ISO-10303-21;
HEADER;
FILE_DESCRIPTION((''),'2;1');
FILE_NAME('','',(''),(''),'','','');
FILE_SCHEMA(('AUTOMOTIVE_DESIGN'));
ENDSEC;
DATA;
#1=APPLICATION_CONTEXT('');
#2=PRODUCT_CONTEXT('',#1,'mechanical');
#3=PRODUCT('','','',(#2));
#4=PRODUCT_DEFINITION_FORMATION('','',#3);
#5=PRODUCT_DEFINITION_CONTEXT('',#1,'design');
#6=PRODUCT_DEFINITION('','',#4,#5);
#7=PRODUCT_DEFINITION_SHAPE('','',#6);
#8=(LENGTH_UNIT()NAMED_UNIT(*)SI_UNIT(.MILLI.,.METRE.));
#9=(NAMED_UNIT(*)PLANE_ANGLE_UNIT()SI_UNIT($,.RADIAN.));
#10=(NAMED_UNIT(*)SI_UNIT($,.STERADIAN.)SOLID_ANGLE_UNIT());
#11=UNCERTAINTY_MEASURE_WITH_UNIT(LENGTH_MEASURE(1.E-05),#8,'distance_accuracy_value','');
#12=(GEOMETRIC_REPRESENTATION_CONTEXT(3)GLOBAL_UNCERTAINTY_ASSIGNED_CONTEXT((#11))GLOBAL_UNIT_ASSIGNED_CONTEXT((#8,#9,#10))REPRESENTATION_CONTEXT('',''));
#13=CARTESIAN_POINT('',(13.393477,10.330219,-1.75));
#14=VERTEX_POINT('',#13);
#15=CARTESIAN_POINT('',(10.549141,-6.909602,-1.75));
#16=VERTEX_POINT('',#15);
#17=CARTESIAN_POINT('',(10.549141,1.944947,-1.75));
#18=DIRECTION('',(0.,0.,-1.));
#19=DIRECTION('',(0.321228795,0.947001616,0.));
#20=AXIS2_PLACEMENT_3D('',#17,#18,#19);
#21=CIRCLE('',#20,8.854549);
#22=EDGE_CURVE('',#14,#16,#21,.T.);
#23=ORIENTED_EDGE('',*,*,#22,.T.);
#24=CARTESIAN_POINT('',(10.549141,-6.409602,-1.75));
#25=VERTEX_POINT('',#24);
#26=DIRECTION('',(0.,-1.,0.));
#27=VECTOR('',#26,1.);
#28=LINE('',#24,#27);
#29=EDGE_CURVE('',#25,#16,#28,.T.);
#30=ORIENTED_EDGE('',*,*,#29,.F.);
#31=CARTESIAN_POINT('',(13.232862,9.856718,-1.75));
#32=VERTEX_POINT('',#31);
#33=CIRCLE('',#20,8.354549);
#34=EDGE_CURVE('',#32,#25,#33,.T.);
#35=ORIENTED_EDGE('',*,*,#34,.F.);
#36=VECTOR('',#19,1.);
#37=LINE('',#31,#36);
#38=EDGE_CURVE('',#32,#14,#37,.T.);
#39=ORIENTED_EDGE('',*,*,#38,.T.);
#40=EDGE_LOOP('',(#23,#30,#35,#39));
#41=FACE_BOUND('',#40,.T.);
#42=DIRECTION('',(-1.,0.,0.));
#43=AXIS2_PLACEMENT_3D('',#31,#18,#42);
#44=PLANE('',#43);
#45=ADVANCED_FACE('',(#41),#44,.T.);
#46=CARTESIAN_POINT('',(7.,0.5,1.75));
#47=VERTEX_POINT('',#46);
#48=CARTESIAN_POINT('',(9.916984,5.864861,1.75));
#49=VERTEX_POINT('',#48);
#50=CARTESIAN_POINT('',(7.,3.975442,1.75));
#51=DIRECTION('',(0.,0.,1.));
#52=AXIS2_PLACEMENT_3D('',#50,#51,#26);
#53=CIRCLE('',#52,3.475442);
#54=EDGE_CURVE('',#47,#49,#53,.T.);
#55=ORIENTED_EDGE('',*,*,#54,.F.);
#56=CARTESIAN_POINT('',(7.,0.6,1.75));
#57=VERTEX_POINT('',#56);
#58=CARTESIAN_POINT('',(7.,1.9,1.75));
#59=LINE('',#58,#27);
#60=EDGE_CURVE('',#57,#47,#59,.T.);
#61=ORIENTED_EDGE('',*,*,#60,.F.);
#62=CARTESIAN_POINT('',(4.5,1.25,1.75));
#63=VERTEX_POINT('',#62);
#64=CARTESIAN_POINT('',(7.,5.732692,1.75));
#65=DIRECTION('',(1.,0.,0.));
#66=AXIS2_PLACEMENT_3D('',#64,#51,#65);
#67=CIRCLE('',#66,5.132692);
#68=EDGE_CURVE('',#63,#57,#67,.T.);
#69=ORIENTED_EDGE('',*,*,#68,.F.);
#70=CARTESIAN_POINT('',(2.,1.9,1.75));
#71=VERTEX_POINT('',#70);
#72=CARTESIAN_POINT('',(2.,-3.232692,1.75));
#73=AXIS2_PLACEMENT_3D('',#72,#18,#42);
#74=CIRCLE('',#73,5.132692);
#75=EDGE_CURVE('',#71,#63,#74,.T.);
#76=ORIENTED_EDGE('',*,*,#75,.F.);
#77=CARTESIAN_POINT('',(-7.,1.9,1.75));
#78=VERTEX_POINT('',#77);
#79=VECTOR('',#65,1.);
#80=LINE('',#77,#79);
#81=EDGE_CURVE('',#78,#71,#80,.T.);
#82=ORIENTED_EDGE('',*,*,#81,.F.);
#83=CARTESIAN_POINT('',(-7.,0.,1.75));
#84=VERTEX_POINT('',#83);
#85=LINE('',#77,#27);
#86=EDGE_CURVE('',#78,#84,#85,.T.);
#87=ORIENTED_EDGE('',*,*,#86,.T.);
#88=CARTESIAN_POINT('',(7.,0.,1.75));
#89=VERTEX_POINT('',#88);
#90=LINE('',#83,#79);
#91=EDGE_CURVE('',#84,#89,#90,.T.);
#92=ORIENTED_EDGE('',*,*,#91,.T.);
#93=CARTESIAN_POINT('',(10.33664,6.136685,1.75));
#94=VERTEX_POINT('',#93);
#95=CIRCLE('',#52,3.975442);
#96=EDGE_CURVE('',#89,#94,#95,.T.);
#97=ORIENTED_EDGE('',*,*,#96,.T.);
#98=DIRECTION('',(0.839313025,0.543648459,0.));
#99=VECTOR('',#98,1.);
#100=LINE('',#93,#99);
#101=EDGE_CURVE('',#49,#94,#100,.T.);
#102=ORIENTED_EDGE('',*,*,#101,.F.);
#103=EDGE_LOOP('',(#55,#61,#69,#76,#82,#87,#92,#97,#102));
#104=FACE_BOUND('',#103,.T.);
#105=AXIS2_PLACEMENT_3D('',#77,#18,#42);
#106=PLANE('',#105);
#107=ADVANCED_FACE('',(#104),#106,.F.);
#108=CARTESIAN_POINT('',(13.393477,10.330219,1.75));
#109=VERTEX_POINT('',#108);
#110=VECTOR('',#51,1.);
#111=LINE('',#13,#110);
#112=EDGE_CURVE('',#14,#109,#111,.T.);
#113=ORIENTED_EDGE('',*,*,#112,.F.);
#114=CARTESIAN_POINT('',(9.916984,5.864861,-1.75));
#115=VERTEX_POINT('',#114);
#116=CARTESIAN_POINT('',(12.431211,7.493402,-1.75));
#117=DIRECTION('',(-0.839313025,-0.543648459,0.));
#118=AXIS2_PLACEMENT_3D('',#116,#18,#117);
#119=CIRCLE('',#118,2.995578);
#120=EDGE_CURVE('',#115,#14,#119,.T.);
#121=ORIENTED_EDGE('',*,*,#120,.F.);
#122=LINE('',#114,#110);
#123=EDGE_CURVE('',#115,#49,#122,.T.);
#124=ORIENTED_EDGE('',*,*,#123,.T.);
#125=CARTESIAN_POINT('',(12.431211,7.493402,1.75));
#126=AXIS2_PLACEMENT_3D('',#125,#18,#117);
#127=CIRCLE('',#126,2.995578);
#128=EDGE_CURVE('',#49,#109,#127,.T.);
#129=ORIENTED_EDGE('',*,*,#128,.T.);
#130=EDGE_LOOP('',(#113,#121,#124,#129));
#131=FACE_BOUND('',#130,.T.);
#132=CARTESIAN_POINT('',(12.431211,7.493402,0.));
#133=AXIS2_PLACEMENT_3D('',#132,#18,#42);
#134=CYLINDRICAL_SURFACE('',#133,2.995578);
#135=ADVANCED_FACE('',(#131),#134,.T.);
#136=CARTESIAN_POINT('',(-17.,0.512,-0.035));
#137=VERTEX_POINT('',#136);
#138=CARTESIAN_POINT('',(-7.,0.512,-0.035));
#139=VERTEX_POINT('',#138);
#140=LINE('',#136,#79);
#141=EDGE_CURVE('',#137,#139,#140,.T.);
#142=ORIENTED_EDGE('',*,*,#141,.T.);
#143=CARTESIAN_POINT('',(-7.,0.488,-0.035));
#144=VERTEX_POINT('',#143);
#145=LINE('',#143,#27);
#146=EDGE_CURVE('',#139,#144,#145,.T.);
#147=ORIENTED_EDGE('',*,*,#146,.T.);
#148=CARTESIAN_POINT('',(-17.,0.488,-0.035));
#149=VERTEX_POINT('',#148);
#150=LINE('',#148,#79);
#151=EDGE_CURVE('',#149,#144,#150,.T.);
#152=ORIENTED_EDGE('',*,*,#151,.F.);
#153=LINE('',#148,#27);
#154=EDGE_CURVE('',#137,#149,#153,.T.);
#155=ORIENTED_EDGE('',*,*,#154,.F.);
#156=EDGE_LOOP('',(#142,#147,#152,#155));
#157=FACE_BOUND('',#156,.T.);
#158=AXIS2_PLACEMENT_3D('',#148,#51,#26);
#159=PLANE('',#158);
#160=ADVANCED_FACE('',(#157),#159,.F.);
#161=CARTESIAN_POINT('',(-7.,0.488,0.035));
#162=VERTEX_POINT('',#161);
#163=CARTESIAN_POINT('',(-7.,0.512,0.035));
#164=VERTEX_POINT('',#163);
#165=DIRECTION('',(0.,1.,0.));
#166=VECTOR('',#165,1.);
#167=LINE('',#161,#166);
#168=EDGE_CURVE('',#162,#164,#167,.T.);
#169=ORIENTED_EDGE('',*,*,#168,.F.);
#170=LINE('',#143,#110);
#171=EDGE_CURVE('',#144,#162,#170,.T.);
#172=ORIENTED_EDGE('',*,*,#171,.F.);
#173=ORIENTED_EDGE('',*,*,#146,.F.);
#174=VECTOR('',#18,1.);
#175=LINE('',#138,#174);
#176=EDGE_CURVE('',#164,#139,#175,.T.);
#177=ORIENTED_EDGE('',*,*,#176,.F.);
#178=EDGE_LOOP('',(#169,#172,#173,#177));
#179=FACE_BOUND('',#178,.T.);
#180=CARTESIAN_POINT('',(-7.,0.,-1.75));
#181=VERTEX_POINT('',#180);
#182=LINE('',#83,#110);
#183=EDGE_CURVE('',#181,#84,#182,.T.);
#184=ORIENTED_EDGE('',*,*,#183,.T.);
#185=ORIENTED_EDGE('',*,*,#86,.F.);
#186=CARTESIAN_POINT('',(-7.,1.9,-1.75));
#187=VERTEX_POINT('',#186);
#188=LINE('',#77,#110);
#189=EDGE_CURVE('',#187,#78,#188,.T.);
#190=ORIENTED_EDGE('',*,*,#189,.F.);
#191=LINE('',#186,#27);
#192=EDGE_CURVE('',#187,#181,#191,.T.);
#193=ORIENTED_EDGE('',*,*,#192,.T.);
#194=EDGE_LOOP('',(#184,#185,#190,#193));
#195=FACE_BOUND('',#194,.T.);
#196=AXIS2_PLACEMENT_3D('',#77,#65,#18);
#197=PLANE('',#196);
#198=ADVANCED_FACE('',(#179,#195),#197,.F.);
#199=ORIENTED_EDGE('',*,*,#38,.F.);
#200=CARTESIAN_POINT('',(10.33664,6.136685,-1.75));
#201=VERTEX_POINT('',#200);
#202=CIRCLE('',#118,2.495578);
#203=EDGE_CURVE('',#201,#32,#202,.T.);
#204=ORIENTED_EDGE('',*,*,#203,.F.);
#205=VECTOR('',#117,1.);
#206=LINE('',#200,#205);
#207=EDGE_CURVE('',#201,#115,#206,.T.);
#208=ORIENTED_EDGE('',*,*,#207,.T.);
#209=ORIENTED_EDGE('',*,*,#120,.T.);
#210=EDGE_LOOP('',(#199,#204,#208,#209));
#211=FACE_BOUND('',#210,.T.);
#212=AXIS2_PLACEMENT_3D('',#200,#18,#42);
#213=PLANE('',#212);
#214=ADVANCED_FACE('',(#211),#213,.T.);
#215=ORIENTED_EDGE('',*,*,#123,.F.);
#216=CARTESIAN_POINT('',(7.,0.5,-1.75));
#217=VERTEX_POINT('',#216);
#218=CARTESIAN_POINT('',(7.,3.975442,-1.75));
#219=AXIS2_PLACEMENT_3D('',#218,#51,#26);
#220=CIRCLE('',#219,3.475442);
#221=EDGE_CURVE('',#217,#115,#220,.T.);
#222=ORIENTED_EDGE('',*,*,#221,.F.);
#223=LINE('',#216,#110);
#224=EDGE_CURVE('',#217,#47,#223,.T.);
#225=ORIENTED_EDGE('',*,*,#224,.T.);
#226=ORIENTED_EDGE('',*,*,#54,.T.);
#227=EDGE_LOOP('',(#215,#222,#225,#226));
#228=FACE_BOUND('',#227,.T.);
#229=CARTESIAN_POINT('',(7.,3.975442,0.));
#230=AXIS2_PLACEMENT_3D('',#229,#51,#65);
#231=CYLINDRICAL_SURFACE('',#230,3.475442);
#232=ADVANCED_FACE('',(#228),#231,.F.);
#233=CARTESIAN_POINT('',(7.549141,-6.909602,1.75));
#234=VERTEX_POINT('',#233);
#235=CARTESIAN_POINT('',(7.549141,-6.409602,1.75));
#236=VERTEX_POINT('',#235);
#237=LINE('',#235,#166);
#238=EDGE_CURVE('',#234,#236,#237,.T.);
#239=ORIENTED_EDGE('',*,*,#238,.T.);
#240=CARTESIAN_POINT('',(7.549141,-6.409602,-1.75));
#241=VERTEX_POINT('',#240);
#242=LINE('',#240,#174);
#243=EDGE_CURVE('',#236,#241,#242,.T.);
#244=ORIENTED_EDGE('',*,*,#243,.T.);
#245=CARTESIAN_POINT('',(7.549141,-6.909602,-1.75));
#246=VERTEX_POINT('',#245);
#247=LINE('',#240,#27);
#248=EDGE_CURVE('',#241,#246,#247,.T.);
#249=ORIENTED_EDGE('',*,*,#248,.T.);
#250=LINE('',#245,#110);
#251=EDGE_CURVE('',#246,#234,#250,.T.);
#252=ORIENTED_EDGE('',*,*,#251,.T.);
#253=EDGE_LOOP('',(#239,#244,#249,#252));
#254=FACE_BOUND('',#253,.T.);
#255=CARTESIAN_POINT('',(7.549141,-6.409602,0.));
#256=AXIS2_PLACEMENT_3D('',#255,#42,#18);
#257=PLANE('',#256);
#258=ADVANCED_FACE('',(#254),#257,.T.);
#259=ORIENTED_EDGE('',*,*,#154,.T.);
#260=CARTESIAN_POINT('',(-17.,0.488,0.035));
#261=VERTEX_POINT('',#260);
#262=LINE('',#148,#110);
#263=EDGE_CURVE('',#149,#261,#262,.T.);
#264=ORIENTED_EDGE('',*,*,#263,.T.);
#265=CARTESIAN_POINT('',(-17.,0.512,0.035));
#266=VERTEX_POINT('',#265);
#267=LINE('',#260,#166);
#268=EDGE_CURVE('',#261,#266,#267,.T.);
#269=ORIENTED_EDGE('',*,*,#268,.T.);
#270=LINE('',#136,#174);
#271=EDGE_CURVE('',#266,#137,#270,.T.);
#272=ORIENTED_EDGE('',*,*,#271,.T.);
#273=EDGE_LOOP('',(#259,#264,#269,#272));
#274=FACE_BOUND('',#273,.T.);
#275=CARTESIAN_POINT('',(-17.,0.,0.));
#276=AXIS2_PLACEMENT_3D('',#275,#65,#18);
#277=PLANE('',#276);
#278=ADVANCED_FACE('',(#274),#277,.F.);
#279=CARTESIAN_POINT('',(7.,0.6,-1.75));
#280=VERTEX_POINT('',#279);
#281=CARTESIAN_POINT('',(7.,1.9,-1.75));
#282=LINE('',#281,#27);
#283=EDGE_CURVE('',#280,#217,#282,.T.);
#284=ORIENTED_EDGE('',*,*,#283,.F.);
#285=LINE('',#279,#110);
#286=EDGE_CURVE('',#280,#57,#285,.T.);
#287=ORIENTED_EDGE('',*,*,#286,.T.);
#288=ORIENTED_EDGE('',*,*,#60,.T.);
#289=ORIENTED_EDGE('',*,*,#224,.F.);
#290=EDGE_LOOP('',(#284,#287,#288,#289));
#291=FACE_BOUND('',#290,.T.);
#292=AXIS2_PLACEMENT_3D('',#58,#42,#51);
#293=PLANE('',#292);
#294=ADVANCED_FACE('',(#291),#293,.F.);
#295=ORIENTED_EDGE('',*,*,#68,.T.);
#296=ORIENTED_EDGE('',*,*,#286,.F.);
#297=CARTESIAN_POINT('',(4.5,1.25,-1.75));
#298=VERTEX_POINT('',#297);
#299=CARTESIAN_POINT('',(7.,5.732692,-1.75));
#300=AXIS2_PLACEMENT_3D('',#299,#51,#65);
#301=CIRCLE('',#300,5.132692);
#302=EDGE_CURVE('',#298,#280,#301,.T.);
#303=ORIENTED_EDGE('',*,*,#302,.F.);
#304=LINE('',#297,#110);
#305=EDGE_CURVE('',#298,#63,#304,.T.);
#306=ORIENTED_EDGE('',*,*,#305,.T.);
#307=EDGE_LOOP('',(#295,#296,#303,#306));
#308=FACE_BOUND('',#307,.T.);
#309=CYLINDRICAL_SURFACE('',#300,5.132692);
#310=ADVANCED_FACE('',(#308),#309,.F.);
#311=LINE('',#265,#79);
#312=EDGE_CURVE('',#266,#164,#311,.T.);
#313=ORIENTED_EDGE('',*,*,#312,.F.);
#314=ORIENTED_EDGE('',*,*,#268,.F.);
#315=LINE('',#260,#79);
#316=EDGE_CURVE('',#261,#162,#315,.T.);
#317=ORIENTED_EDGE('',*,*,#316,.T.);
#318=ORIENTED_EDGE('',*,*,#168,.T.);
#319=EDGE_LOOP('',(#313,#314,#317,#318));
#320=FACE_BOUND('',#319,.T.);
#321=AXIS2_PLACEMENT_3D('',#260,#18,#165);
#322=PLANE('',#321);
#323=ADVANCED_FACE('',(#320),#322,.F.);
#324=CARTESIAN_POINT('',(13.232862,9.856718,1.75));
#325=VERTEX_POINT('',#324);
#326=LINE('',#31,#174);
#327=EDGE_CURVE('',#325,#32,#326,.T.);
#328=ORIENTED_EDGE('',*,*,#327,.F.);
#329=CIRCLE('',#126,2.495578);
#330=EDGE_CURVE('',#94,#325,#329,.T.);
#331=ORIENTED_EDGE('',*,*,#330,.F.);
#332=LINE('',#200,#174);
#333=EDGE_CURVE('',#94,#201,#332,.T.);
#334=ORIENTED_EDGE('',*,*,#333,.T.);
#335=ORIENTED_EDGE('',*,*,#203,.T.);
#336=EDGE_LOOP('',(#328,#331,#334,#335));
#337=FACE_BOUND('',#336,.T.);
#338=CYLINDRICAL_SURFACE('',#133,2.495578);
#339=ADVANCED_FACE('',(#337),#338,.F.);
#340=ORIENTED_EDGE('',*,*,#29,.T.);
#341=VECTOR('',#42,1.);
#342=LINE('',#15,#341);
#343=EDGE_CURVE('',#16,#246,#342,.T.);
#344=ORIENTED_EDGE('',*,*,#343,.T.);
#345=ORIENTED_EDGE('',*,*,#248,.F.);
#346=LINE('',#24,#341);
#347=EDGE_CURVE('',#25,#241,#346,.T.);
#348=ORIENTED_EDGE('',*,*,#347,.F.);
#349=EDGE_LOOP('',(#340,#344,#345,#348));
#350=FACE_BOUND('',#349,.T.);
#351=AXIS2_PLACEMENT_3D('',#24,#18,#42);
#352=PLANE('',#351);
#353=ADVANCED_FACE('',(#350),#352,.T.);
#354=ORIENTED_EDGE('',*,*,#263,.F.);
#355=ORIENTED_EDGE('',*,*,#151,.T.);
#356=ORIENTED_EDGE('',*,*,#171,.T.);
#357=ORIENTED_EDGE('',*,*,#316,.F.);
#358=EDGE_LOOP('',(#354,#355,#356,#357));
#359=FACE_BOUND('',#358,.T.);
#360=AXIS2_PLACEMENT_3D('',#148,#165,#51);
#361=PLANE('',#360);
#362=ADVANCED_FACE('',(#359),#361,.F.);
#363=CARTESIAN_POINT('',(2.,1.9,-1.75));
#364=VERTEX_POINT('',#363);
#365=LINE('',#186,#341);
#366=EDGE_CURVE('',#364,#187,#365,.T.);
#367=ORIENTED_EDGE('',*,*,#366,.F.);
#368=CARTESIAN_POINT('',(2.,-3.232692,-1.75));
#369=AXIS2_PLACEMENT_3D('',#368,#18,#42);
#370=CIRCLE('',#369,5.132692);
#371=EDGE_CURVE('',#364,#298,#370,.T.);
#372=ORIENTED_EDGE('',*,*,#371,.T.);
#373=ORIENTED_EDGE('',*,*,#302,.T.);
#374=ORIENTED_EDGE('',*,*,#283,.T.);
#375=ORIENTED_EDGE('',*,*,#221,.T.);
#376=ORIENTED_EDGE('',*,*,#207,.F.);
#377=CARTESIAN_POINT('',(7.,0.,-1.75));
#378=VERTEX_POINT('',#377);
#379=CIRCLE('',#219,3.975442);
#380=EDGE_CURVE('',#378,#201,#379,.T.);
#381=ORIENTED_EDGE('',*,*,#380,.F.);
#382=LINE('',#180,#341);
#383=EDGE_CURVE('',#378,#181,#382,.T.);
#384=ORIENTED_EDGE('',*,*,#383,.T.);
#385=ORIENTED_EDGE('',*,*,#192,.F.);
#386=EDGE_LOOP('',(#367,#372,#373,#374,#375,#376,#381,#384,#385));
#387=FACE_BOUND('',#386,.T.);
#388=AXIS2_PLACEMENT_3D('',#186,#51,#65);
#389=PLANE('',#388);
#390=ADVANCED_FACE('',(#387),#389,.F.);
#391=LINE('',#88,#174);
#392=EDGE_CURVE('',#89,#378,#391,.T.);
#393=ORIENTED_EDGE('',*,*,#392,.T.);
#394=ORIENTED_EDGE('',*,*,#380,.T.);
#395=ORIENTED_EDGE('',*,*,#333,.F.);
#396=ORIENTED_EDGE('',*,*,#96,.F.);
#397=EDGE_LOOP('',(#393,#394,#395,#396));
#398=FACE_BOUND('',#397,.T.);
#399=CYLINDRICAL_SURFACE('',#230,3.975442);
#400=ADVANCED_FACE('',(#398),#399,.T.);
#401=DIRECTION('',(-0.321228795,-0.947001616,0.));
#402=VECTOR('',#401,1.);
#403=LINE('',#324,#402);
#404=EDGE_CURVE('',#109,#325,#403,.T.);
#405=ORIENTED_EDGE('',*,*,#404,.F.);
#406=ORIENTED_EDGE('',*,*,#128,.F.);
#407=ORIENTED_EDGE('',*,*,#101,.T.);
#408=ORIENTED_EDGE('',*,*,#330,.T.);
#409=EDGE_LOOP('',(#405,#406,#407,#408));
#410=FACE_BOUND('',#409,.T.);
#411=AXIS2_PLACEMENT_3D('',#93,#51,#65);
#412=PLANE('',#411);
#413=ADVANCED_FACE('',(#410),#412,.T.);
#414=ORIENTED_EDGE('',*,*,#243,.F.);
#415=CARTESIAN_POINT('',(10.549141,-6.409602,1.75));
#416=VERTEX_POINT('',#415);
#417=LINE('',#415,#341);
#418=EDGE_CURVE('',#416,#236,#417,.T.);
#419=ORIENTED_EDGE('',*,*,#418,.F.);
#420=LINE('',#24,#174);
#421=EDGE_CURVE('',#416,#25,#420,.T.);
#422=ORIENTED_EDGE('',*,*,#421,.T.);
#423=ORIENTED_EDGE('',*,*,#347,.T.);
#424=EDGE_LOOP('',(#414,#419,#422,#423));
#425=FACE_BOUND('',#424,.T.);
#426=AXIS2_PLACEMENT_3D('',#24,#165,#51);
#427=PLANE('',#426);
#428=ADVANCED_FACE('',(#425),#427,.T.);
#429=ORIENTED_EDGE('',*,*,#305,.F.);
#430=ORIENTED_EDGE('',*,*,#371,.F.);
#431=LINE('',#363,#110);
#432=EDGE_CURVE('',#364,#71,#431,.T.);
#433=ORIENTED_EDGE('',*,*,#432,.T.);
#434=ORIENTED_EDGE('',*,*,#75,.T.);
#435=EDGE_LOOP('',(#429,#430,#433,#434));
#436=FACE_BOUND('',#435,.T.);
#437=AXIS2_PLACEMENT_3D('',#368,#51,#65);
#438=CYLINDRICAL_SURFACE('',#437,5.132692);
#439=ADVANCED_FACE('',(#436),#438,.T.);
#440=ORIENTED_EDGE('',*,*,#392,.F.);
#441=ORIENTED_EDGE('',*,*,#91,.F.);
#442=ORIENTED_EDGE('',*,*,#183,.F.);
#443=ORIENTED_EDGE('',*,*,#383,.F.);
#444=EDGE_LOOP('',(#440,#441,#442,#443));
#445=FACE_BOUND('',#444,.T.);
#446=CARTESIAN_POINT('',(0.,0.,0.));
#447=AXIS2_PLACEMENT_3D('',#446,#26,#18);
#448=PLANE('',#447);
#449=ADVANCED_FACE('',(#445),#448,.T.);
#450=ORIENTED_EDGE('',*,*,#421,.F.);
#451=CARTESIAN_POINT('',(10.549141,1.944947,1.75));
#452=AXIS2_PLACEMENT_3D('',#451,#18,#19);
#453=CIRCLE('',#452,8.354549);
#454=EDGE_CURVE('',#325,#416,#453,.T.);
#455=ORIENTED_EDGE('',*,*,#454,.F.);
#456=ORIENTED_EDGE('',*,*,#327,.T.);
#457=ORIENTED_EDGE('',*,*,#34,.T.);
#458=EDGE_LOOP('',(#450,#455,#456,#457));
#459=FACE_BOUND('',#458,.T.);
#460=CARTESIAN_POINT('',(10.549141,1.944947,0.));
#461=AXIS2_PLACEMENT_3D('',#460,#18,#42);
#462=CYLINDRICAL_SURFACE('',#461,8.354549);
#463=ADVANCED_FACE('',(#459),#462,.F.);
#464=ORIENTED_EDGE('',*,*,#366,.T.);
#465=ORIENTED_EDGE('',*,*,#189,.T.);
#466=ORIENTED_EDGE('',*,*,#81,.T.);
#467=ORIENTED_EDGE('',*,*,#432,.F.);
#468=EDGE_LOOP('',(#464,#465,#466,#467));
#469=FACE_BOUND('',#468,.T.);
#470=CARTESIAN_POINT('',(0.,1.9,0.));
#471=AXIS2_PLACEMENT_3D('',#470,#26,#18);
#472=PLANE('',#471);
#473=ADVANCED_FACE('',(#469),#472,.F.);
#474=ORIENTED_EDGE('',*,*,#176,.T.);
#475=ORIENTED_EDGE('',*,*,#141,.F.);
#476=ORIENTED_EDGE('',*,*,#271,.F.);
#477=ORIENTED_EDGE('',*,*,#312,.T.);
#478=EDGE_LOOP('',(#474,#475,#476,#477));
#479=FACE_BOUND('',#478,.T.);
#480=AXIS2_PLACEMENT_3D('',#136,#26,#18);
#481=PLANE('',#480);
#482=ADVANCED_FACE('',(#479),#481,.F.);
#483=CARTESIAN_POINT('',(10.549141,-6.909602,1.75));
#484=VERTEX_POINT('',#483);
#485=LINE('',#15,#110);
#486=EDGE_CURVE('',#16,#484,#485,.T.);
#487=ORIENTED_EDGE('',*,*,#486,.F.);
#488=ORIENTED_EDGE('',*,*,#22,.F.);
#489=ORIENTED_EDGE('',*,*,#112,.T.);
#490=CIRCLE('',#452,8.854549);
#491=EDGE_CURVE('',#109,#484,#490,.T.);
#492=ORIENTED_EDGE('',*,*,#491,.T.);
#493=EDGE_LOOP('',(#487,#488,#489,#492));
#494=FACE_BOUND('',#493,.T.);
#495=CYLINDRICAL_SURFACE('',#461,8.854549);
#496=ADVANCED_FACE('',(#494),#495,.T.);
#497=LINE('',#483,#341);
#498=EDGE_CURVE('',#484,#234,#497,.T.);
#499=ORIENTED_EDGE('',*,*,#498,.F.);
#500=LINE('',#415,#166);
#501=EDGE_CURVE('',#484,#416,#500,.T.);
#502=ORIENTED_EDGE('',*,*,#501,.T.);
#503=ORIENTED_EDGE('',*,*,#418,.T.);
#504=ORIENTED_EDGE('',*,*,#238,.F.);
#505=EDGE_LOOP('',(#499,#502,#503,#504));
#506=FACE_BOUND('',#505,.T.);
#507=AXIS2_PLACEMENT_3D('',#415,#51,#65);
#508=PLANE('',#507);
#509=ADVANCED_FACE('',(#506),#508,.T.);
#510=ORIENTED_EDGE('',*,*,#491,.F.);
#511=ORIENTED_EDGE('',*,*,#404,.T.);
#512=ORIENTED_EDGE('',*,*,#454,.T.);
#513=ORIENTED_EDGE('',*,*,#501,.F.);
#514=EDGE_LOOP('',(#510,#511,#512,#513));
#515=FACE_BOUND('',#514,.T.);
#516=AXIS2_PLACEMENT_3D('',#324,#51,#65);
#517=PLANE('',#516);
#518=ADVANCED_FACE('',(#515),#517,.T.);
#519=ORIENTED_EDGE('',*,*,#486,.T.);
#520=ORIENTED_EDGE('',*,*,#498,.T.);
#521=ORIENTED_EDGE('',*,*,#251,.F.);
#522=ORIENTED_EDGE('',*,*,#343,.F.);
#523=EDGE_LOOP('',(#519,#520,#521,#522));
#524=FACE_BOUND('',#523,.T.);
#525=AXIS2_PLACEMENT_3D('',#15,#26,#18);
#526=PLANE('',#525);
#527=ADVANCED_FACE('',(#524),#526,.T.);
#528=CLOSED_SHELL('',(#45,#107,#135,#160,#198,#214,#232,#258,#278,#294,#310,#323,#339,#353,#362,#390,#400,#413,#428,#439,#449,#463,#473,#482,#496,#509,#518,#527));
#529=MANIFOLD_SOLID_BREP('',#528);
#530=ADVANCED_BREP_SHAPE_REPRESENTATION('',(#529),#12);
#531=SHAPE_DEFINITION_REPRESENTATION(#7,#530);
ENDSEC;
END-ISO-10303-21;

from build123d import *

# Parameters (mm, degrees)
SKETCH1_W               = 14
SKETCH1_H               = 3.5
BOSS_EXTRUDE1_DEPTH     = 1.9
CUT_EXTRUDE1_DEPTH      = 8.461400673
CUT_EXTRUDE1_DEPTH_BACK = 8.461400673
SKETCH4_W               = 0.07
SKETCH4_H               = 0.024
BOSS_EXTRUDE3_DEPTH     = 10
SWEEP1_START            = -1.75
SWEEP1_DEPTH            = 3.5


# Read off the part's stored shape, not the designer's step: Sweep1
with BuildPart() as part:
    # Sketch1 → Boss-Extrude1 (new body)
    with BuildSketch(Plane(origin=(0, 0, 0), x_dir=(1, 0, 0), z_dir=(0, 1, 0))):
        Rectangle(SKETCH1_W, SKETCH1_H)
    extrude(amount=BOSS_EXTRUDE1_DEPTH)

    # Sketch3 → Cut-Extrude1 (cut, two sides: drawn at the far end of the back side and taken through both)
    with BuildSketch(Plane.XY.offset(-CUT_EXTRUDE1_DEPTH_BACK)):
        with BuildLine():
            Line((7, 0.6), (7, 1.9))
            Line((7, 1.9), (2, 1.9))
            ThreePointArc((2, 1.9), (3.291559135, 1.734842828), (4.5, 1.25))
            ThreePointArc((4.5, 1.25), (5.708440865, 0.765157172), (7, 0.6))
        make_face()
    extrude(amount=CUT_EXTRUDE1_DEPTH + CUT_EXTRUDE1_DEPTH_BACK, mode=Mode.SUBTRACT)

    # Sketch4 → Boss-Extrude3 (add)
    with BuildSketch(Plane.ZY.offset(7)):
        with Locations((0, 0.5)):
            Rectangle(SKETCH4_W, SKETCH4_H)
    extrude(amount=BOSS_EXTRUDE3_DEPTH)

    # Sweep1 outline → Sweep1 (add)
    with BuildSketch(Plane.XY.offset(SWEEP1_START)):
        with BuildLine():
            Line((10.549140882, -6.409601789), (7.549140882, -6.409601789))
            Line((7.549140882, -6.409601789), (7.549140882, -6.909601789))
            Line((7.549140882, -6.909601789), (10.549140882, -6.909601789))
            ThreePointArc((10.549140882, -6.909601789), (19.285582655, 0.503552751), (13.39347688, 10.330218748))
            ThreePointArc((13.39347688, 10.330218748), (10.067527148, 9.33364199), (9.916983753, 5.864860714))
            ThreePointArc((9.916983753, 5.864860714), (10.053298409, 2.315301648), (7, 0.5))
            Line((7, 0.5), (7, 0))
            ThreePointArc((7, 0), (10.492566046, 2.076462911), (10.336640265, 6.136684944))
            ThreePointArc((10.336640265, 6.136684944), (10.462056054, 9.026482516), (13.232862483, 9.85671794))
            ThreePointArc((13.232862483, 9.85671794), (18.792251933, 0.584945612), (10.549140882, -6.409601789))
        make_face()
    extrude(amount=SWEEP1_DEPTH)


solid = part.part
